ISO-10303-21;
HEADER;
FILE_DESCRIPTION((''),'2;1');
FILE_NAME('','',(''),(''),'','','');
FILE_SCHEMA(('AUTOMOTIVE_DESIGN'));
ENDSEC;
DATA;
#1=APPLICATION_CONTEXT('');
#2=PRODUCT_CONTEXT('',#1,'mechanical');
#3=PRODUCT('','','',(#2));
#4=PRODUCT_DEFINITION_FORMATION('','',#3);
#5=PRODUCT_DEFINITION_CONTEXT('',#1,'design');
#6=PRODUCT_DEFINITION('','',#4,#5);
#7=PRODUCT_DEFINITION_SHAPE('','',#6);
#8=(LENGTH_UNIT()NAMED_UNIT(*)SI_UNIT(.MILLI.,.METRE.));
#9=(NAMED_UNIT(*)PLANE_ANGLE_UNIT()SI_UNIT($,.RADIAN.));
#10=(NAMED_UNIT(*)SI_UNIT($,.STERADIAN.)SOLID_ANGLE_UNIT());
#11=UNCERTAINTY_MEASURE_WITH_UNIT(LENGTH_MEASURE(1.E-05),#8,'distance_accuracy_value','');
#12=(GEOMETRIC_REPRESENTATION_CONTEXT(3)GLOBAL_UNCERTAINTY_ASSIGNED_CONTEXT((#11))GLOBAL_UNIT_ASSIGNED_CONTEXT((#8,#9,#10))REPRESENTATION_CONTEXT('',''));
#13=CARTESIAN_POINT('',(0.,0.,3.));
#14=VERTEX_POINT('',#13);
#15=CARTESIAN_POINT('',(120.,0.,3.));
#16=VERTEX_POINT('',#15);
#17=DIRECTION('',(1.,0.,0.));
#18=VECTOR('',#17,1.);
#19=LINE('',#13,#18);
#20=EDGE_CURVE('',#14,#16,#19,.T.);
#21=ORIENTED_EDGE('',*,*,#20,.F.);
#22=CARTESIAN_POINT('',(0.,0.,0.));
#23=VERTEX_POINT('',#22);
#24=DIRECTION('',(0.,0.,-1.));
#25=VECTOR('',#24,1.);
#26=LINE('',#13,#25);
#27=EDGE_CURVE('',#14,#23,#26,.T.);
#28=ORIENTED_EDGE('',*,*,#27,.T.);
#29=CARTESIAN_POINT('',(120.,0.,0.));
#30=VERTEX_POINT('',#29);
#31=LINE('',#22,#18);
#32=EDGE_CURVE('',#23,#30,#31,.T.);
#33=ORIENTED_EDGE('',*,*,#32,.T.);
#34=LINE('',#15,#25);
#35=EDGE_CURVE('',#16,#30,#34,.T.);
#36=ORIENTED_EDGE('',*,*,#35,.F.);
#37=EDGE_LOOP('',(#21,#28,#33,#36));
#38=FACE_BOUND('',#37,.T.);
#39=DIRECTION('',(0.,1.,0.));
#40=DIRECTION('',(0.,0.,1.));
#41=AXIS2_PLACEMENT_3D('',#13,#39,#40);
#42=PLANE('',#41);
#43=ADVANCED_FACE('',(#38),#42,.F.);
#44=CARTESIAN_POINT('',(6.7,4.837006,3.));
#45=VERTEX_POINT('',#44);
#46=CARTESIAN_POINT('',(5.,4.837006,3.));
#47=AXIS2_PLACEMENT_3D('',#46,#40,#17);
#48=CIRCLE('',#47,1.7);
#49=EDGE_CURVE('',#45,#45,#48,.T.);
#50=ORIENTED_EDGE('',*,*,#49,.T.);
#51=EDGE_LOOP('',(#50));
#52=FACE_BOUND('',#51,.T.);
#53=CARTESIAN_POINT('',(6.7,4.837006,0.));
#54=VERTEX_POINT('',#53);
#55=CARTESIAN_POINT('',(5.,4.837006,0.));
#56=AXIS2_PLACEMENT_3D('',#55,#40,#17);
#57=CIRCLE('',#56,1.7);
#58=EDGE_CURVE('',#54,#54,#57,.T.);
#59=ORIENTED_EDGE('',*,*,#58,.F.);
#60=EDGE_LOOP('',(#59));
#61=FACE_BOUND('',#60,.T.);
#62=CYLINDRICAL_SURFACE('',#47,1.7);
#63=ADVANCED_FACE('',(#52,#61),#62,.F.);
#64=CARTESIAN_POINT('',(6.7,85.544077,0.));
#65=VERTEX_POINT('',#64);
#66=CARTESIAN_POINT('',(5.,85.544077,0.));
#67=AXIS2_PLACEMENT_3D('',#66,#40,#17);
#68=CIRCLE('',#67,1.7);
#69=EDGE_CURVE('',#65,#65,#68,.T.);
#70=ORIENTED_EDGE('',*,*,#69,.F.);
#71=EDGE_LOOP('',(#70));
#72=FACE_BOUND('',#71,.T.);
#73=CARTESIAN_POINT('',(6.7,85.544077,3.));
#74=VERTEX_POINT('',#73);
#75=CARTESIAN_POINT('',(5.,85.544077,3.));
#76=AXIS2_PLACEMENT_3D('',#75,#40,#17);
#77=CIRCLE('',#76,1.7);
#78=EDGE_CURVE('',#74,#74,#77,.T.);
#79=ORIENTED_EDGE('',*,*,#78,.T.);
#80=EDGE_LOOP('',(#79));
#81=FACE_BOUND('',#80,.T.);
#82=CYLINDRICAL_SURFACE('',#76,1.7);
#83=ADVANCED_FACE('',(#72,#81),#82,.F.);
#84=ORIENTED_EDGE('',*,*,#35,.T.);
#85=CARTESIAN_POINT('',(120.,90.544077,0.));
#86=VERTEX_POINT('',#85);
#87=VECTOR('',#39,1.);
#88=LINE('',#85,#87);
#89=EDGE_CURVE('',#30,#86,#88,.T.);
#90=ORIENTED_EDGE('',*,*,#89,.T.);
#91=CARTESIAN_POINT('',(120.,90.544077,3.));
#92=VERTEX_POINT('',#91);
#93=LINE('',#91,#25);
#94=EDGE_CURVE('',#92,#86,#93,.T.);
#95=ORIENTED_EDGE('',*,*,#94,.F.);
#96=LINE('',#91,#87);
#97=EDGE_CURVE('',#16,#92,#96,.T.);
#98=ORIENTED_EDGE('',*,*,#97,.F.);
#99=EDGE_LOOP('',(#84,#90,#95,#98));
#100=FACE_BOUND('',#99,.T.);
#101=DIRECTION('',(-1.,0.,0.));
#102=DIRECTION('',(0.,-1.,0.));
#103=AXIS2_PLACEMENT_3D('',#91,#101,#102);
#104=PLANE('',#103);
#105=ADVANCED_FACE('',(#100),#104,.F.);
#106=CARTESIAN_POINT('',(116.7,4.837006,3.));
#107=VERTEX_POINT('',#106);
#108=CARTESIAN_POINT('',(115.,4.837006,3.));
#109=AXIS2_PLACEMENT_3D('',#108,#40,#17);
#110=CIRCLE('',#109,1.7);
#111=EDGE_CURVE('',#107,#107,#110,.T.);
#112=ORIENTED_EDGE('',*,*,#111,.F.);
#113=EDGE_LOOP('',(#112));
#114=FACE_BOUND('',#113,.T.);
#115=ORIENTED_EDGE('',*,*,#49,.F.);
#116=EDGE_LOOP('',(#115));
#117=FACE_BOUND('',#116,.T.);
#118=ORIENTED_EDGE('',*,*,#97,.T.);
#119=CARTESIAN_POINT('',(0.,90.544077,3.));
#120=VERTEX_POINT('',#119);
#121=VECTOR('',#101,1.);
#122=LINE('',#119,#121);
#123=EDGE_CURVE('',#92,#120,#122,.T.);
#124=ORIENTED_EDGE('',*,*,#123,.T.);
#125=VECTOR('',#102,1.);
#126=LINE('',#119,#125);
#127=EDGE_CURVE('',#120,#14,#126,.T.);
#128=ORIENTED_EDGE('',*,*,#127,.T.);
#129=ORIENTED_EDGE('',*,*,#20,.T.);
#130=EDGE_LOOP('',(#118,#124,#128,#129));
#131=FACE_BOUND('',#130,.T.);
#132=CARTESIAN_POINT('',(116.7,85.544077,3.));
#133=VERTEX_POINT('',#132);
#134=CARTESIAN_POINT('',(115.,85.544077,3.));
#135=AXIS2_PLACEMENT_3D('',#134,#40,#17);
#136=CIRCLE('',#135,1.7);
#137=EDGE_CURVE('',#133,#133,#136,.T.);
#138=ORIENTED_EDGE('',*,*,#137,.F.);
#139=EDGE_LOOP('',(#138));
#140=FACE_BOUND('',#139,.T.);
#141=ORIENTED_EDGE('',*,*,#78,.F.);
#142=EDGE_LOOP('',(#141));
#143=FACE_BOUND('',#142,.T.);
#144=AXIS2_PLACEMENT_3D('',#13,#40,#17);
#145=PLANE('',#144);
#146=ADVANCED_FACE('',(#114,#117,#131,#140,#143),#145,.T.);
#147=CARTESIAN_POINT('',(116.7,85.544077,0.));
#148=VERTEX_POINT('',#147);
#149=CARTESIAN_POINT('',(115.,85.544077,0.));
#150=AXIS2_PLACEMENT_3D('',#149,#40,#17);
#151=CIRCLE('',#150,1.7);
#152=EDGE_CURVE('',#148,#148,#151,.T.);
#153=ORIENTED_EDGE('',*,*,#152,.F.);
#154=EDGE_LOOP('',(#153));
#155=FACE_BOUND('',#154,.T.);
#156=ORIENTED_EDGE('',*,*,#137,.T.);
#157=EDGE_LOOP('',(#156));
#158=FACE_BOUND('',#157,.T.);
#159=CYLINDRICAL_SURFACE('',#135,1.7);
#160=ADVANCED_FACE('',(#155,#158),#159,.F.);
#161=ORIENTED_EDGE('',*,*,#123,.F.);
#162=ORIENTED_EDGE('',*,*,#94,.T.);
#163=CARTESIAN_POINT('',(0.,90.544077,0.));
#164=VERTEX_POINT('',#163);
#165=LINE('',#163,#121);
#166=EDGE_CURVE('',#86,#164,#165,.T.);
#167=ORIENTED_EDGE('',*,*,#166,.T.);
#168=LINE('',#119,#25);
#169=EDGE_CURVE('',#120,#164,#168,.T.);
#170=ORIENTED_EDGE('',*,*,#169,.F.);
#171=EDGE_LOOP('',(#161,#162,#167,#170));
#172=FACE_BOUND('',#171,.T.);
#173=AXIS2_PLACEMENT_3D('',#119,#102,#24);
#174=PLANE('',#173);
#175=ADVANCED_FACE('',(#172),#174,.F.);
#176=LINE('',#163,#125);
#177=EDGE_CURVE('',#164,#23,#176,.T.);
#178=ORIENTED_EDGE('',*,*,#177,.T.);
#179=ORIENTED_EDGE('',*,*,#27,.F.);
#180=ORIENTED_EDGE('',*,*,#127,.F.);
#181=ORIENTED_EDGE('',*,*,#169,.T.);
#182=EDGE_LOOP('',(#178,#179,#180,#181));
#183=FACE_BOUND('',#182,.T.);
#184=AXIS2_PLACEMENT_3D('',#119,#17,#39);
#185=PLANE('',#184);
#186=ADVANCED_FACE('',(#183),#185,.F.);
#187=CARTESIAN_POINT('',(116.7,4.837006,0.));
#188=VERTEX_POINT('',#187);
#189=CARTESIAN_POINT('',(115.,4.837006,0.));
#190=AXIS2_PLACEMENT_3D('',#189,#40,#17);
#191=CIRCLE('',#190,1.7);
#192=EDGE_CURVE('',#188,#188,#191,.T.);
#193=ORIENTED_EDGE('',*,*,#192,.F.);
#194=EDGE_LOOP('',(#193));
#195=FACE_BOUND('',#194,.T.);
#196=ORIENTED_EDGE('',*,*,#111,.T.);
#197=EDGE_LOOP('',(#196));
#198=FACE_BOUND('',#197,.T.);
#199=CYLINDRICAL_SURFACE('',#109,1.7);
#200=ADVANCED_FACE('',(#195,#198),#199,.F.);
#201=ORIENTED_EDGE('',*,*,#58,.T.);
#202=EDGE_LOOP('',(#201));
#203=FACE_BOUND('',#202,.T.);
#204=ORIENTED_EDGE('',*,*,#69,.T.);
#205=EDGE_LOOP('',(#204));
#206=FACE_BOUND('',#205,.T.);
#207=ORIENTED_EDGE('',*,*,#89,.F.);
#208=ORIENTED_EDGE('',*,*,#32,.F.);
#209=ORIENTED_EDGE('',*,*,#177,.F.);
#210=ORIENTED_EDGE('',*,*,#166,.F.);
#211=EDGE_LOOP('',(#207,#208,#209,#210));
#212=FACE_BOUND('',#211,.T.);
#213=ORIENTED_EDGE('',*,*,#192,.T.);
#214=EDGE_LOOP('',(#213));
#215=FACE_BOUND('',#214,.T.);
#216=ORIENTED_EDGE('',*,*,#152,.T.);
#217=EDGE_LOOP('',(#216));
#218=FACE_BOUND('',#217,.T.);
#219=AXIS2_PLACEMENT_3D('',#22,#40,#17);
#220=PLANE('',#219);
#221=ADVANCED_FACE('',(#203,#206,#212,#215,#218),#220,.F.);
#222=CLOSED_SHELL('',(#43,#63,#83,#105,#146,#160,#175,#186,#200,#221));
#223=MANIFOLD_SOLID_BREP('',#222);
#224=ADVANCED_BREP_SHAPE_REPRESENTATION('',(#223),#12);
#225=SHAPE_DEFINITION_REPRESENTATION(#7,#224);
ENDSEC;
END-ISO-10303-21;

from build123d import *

# Parameters (mm, degrees)
SKETCH1_W                    = 120
SKETCH1_H                    = 90.54407714
BOSS_EXTRUDE1_DEPTH          = 3
M3_CLEARANCE_HOLE1_OUTLINE_R = 1.7
M3_CLEARANCE_HOLE1_DEPTH     = 3


# Read off the part's stored shape, not the designer's step: M3 Clearance Hole1
with BuildPart() as part:
    # Sketch1 → Boss-Extrude1 (new body)
    with BuildSketch(Plane.XY):
        with Locations((60, 45.27203857)):
            Rectangle(SKETCH1_W, SKETCH1_H)
    extrude(amount=BOSS_EXTRUDE1_DEPTH)

    # M3 Clearance Hole1 outline → M3 Clearance Hole1 (cut)
    with BuildSketch(Plane.XY):
        with Locations((115, 85.54407714)):
            Circle(M3_CLEARANCE_HOLE1_OUTLINE_R)
        with Locations((5, 4.837006433)):
            Circle(M3_CLEARANCE_HOLE1_OUTLINE_R)
        with Locations((115, 4.837006433)):
            Circle(M3_CLEARANCE_HOLE1_OUTLINE_R)
        with Locations((5, 85.54407714)):
            Circle(M3_CLEARANCE_HOLE1_OUTLINE_R)
    extrude(amount=M3_CLEARANCE_HOLE1_DEPTH, mode=Mode.SUBTRACT)


solid = part.part
